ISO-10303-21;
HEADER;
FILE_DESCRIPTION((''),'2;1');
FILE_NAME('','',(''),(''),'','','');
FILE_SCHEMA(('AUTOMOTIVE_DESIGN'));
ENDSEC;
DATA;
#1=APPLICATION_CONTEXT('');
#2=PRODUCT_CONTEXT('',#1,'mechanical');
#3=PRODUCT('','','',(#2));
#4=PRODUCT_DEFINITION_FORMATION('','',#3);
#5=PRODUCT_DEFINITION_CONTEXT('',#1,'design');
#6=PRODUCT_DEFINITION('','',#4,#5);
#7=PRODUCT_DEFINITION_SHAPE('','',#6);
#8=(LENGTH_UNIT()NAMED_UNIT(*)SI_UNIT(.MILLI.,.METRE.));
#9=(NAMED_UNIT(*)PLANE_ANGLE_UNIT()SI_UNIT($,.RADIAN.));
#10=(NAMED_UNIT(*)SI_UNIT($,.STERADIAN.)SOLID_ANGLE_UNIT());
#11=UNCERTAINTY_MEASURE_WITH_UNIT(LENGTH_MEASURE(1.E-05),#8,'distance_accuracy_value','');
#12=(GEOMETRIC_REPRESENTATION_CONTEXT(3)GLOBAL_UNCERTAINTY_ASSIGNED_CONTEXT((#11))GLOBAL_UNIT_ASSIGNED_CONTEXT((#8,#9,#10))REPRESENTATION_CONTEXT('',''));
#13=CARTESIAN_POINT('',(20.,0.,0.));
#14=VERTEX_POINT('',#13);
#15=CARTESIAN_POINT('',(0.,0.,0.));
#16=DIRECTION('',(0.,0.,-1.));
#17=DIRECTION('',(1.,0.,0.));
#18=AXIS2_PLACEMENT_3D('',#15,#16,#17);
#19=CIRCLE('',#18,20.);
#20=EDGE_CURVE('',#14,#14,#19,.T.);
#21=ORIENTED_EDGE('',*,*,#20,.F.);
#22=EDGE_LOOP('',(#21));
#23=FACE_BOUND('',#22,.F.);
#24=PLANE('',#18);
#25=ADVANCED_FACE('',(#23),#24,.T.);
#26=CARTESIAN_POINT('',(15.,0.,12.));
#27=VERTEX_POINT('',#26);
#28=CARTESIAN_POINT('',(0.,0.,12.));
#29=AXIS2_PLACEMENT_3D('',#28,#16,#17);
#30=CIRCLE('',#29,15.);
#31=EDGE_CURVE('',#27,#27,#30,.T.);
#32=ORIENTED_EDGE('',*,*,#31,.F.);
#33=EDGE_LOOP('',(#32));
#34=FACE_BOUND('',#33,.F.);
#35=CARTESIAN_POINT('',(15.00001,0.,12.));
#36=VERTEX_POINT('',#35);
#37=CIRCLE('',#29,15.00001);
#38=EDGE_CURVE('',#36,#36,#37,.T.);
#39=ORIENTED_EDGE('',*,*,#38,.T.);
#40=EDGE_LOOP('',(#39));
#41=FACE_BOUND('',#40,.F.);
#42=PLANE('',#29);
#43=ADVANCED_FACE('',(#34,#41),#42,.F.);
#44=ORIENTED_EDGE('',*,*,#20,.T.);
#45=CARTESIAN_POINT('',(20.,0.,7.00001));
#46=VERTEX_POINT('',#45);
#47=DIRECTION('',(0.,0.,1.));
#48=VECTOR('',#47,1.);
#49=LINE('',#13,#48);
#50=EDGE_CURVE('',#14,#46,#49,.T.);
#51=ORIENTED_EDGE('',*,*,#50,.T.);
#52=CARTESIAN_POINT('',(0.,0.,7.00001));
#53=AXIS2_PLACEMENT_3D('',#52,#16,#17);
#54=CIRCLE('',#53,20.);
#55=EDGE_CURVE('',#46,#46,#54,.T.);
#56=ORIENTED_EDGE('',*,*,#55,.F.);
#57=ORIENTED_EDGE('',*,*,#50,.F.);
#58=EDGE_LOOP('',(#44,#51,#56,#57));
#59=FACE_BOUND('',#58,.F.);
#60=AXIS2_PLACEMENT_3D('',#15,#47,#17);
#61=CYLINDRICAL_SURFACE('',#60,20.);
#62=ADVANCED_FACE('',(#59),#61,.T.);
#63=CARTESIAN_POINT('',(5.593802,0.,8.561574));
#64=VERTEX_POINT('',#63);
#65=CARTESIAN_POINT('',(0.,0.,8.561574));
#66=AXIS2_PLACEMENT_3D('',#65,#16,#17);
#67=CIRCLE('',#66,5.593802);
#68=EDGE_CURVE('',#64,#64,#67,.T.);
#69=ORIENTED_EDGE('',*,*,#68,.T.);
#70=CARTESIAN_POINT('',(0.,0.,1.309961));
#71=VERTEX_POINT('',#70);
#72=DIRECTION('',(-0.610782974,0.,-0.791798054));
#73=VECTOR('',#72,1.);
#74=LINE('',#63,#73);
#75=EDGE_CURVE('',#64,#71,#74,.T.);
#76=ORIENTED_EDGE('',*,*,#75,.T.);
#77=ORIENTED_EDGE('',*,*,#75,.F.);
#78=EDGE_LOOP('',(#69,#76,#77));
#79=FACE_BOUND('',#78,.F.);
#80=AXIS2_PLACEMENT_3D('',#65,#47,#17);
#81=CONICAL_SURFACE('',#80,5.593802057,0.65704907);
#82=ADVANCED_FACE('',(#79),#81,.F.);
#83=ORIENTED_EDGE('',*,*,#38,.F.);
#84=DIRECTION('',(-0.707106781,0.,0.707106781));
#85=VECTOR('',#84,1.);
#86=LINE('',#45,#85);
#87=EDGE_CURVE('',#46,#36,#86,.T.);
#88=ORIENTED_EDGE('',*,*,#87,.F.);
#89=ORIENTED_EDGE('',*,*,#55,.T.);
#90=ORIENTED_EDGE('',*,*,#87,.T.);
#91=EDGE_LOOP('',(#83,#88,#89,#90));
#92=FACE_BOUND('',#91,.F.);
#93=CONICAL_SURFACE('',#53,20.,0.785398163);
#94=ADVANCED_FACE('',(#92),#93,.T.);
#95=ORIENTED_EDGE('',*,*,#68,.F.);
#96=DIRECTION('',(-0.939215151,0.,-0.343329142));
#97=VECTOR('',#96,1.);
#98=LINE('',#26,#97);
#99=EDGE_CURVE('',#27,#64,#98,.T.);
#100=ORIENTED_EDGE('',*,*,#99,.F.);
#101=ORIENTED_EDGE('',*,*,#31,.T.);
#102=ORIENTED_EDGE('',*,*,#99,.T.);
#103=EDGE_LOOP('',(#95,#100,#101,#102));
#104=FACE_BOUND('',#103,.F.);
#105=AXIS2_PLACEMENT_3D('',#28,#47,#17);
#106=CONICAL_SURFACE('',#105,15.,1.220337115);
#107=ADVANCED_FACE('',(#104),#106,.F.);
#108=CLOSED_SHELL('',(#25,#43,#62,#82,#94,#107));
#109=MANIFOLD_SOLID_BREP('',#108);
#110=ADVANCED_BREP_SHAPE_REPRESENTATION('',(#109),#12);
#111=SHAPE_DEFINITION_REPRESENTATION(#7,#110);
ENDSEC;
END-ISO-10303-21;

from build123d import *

# Parameters (mm, degrees)
F2_SIZE = 4.99999


# Not quite as in the source:
# - a fillet or chamfer is up to 0.001 mm smaller than in the source, because OpenCascade refuses the exact size


with BuildPart() as f1:
    # F0 (on Front) → F1 (revolve)
    with BuildSketch(Plane.XZ):
        Polygon((0, 1.309961197), (0, 0), (20, 0), (20, 12), (15, 12), (5.5938020571, 8.5615739226), align=None)
    revolve(axis=Axis((0, 0, 0.6549805985), (0, 0, -1)))

    # F2 (size 5 in the source; OpenCascade refuses exactly that, so slightly less here)
    f2_edges = [f1.edges().sort_by_distance(p)[0] for p in [
        (-20, 0, 12),
    ]]
    chamfer(f2_edges, length=F2_SIZE)


solid = f1.part
